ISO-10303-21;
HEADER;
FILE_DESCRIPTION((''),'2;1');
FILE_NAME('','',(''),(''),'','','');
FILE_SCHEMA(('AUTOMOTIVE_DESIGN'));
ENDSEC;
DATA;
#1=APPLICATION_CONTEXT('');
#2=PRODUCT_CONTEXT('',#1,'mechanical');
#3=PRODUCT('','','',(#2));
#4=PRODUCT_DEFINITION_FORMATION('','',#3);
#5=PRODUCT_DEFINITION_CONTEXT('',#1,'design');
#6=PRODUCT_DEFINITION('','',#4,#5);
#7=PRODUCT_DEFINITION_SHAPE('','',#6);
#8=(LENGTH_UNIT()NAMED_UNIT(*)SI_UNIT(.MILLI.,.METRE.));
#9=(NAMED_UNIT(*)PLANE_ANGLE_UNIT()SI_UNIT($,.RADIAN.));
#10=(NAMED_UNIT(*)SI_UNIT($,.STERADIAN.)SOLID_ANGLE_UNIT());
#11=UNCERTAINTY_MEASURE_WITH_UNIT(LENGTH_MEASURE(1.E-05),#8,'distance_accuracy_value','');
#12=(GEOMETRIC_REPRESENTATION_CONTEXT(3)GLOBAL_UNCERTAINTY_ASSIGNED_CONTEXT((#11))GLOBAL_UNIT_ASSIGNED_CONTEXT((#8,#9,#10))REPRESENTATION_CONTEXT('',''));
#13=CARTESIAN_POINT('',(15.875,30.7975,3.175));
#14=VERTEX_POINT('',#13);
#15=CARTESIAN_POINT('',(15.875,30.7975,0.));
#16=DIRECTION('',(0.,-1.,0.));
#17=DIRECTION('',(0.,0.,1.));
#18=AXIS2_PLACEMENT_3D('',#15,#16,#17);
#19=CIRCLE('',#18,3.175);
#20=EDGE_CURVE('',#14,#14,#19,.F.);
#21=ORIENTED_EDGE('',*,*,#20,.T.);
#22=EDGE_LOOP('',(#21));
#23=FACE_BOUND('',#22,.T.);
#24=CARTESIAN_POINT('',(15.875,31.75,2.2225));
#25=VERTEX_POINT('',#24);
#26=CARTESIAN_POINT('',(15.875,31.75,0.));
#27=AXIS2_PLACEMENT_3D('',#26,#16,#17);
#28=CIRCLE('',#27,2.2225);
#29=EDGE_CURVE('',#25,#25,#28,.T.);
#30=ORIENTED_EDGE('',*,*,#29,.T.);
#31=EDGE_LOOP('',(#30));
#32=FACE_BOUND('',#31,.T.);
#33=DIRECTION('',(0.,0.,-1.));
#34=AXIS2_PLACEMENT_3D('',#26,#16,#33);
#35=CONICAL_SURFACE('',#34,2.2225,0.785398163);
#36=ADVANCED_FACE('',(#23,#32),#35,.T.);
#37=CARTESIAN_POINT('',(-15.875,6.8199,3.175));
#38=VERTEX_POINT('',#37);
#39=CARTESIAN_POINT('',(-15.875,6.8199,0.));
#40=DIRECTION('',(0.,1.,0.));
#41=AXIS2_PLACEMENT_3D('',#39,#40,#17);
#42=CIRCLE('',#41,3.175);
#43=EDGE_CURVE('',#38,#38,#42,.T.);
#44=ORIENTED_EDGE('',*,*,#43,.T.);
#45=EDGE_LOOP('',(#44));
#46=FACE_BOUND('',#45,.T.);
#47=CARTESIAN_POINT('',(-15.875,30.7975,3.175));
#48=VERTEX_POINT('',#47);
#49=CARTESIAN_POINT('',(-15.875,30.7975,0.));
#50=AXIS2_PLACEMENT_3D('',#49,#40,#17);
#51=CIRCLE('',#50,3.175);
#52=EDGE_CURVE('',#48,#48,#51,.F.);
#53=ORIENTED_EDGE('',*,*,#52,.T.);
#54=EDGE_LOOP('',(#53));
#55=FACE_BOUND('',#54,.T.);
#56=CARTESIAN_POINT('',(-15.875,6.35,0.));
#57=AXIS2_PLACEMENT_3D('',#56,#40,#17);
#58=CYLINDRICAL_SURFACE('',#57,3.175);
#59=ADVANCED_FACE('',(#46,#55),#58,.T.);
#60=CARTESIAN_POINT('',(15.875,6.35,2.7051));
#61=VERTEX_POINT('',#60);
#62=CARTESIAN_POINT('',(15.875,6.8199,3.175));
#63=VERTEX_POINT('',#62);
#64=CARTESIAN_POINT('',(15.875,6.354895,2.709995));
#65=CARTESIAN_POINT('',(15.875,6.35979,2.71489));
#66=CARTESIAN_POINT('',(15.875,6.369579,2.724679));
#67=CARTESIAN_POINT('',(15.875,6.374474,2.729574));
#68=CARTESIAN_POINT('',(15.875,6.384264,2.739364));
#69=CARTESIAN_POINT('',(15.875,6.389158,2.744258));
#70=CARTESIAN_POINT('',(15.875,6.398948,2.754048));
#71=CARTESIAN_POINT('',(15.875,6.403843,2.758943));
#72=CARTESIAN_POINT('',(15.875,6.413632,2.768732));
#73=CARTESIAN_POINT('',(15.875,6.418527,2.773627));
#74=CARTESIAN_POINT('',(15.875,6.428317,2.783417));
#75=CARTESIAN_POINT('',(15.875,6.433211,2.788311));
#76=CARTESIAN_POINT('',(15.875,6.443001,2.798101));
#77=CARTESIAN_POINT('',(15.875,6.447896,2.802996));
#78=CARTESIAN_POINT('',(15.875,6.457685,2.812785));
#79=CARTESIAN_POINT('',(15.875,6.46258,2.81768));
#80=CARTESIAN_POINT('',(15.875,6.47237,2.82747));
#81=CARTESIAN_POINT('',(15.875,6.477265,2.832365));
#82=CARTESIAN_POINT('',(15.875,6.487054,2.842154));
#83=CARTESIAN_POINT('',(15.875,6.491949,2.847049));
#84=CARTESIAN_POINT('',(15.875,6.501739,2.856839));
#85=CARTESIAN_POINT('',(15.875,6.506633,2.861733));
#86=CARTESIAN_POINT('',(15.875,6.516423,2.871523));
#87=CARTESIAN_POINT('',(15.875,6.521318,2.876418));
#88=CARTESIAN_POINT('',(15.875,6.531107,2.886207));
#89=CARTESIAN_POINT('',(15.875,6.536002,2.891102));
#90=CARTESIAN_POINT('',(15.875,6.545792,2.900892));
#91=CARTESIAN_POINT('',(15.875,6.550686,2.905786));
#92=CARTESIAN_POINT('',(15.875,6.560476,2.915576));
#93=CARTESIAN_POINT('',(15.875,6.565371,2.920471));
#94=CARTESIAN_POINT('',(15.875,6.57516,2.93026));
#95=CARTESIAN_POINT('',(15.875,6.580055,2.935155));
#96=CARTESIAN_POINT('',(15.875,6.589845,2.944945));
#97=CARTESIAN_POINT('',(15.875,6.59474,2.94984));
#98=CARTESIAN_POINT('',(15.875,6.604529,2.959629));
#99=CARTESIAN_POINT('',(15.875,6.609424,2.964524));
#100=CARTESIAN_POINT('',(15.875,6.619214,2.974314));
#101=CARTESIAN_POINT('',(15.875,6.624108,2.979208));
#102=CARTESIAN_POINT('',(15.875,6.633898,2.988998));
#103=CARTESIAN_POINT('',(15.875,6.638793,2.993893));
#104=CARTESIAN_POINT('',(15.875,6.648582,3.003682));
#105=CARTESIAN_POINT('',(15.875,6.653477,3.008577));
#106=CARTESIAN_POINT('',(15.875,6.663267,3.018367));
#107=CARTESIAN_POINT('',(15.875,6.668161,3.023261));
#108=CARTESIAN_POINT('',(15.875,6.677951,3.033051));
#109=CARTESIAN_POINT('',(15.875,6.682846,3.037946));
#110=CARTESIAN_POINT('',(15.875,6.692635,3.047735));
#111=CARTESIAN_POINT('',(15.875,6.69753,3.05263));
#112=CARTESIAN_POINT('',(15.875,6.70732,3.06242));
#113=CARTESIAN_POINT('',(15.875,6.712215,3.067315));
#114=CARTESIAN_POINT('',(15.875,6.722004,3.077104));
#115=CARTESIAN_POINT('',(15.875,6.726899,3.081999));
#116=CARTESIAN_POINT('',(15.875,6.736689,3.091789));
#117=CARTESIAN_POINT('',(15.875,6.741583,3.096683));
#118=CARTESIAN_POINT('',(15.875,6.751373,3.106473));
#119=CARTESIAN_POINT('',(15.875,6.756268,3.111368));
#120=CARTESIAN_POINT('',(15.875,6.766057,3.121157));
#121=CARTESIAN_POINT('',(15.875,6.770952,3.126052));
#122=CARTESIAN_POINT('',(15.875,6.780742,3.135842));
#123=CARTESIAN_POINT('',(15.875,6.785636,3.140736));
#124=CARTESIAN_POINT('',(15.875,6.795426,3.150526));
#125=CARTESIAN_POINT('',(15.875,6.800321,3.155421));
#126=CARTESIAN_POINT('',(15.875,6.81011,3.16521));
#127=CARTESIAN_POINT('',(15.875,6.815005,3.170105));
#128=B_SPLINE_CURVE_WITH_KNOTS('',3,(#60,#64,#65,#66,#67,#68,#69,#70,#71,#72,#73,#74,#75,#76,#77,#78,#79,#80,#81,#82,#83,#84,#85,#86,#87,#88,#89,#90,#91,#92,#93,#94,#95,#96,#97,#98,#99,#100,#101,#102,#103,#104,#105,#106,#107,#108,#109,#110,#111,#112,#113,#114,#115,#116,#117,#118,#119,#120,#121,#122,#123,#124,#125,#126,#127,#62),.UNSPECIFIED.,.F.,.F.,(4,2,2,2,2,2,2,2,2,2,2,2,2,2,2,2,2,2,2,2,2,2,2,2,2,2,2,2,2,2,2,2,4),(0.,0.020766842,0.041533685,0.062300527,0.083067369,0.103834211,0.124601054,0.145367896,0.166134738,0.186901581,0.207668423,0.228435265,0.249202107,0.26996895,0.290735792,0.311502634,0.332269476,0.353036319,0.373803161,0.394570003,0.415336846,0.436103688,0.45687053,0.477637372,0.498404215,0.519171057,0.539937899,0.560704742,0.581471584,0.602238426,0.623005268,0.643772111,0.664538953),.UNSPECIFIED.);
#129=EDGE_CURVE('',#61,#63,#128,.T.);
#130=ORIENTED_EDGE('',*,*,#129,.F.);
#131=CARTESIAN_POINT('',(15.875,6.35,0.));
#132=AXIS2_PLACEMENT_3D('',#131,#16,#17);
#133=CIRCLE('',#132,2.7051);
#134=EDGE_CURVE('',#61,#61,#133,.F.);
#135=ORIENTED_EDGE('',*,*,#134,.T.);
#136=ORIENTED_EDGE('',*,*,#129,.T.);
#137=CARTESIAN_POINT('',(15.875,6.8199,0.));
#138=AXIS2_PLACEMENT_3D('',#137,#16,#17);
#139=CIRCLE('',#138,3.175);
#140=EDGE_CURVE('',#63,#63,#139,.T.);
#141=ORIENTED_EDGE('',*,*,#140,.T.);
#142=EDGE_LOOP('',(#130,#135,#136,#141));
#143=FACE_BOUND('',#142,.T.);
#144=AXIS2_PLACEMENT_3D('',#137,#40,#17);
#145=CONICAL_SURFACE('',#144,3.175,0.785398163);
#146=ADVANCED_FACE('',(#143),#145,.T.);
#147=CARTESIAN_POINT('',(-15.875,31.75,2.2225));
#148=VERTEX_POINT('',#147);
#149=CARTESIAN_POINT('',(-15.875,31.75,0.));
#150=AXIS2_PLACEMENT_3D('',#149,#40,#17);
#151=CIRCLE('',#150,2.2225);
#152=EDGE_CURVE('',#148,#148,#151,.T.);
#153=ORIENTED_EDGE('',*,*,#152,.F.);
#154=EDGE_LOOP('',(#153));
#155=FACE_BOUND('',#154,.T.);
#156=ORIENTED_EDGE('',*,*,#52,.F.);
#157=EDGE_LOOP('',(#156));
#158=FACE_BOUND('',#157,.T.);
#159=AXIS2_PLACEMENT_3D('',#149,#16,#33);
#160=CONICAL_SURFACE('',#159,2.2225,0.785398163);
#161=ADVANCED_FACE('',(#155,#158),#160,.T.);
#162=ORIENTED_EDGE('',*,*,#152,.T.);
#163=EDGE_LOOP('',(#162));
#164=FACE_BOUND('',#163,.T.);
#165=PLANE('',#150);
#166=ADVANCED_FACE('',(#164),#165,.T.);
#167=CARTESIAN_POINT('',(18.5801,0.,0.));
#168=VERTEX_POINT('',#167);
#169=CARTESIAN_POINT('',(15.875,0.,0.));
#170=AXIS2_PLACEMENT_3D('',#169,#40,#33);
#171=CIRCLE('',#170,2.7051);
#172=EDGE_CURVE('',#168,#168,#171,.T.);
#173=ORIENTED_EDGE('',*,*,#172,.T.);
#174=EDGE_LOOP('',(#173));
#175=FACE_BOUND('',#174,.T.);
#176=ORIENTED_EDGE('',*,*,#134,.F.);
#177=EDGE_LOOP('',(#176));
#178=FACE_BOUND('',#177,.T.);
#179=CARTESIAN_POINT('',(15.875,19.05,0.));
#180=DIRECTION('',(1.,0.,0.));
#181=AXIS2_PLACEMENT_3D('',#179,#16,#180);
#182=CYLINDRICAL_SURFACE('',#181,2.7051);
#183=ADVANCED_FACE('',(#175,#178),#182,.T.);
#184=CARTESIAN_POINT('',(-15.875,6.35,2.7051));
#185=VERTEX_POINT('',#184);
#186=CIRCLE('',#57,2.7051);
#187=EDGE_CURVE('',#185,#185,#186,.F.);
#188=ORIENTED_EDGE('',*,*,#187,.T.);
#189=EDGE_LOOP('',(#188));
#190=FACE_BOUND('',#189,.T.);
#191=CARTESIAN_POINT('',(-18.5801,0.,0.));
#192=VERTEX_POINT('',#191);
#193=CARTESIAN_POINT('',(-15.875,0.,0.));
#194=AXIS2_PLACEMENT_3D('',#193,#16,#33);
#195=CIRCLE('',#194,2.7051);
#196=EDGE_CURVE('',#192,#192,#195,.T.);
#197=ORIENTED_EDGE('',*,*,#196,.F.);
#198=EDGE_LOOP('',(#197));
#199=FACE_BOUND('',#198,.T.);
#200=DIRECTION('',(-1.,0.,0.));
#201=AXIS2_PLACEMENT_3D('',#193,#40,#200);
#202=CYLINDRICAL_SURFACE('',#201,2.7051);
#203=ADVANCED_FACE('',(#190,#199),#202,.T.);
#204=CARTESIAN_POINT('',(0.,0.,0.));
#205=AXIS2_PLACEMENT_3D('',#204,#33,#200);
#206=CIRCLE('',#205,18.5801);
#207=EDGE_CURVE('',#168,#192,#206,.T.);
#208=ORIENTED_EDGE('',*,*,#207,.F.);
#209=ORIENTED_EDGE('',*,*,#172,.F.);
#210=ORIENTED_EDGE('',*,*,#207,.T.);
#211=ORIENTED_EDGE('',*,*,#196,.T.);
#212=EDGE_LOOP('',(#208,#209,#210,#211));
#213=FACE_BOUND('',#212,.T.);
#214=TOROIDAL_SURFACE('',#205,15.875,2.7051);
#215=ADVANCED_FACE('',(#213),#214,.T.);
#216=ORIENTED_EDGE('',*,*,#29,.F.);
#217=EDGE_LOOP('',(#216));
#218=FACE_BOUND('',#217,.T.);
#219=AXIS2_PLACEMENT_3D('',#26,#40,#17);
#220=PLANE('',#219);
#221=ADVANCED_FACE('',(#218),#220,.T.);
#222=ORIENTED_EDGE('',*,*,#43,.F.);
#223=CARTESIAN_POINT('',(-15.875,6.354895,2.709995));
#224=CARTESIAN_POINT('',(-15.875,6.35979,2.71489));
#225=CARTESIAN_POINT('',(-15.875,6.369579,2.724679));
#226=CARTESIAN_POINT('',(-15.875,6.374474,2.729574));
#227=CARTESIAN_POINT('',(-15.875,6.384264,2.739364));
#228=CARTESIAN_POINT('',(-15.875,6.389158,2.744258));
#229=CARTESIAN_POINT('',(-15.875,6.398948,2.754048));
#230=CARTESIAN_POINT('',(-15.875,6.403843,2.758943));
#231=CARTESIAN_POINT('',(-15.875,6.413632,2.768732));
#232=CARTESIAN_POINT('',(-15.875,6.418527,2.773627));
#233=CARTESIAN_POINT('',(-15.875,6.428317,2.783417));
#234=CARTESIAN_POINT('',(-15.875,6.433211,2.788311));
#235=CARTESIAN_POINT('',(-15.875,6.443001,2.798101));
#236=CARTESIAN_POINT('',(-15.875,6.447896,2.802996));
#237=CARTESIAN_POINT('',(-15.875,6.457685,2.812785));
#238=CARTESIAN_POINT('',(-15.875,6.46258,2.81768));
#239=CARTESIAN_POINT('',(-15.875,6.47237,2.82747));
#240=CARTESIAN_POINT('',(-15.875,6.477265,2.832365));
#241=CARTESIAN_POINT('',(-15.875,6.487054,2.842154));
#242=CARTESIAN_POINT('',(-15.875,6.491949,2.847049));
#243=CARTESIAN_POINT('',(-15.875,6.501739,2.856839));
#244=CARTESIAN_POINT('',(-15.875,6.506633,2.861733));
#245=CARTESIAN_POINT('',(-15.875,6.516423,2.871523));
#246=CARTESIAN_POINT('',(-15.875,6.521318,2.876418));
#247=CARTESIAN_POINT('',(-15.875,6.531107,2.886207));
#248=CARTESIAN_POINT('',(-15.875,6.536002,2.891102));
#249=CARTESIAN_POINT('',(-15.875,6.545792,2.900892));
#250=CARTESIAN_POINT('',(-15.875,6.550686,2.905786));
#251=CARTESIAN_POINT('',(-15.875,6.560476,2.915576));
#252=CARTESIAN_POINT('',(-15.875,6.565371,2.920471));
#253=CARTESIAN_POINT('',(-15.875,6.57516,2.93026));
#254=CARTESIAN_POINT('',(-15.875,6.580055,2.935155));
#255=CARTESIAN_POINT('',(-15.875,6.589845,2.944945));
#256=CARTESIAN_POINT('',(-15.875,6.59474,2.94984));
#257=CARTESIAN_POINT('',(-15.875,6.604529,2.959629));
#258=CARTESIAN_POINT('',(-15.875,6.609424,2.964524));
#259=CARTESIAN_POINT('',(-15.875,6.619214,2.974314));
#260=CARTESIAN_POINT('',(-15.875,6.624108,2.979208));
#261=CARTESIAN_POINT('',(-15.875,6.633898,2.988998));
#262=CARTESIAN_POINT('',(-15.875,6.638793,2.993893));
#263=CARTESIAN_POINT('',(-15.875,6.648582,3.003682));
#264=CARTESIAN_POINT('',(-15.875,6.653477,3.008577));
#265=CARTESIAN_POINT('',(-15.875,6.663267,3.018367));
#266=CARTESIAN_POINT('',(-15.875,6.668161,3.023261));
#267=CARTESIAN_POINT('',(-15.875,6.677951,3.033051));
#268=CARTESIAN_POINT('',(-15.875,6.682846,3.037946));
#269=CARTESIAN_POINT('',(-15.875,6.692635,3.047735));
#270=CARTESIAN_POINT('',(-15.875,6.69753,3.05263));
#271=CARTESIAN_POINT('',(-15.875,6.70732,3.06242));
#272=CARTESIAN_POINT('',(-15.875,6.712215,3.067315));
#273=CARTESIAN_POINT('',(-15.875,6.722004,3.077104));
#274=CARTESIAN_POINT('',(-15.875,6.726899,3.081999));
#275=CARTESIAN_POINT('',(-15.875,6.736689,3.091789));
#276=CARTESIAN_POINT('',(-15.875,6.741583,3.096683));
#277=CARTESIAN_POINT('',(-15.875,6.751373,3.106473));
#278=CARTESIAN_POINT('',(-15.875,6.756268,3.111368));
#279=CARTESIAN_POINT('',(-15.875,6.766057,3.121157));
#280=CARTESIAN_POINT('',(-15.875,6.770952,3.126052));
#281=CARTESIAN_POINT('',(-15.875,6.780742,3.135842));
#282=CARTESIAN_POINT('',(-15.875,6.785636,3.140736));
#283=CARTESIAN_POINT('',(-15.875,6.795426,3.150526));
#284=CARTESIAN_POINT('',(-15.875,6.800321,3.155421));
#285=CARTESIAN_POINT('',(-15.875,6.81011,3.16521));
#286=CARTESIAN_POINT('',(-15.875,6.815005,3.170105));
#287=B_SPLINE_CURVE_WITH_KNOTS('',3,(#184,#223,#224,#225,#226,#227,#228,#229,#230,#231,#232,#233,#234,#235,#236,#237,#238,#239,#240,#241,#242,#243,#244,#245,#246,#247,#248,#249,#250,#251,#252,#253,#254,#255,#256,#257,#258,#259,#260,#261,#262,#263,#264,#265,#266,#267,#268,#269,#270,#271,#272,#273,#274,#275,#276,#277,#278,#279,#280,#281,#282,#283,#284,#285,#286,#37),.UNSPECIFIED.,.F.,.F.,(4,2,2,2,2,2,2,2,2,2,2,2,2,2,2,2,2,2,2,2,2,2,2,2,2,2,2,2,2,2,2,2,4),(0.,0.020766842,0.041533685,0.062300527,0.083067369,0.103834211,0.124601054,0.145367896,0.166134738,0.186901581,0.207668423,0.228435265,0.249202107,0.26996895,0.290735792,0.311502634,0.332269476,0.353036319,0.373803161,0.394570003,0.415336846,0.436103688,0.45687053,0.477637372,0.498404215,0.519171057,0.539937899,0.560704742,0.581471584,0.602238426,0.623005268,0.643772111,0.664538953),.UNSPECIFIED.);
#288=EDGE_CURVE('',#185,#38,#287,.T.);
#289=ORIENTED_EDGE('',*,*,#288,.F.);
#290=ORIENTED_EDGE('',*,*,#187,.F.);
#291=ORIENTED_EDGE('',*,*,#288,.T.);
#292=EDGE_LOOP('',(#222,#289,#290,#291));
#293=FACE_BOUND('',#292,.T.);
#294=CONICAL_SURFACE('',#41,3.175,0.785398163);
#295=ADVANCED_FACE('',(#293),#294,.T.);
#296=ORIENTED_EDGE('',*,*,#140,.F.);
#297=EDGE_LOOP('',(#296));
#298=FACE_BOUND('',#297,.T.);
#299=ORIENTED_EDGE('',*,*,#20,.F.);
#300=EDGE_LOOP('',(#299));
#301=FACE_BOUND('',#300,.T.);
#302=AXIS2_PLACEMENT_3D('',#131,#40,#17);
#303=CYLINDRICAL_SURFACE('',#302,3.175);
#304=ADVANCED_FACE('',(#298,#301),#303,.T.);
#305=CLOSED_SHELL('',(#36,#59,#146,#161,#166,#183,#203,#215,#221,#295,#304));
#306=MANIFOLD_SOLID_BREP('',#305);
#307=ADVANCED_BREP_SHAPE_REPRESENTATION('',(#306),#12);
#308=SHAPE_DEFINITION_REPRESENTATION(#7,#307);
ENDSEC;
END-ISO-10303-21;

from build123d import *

# Parameters (mm, degrees)
SKETCH2_R           = 3.175
BOSS_EXTRUDE1_DEPTH = 25.4
CHAMFER2_SIZE       = 0.9525
CHAMFER3_SIZE       = 0.4699
SKETCH12_R          = 2.7051
SKETCH9_R           = 3.175
BOSS_EXTRUDE2_DEPTH = 2.778125
SKETCH10_OUTSIDE_W  = 233.937
SKETCH10_OUTSIDE_H  = 203.708
SKETCH10_OUTSIDE_R  = 5.55625
CUT_EXTRUDE1_DEPTH  = 51.205782884
CUT_EXTRUDE1_DRAFT  = -60
SKETCH11_OUTSIDE_W  = 217.071
SKETCH11_OUTSIDE_H  = 186.842
SKETCH11_OUTSIDE_R  = 5.55625
CUT_EXTRUDE2_DEPTH  = 46.336665415
CUT_EXTRUDE2_DRAFT  = -60
CHAMFER4_SIZE       = 0.381
LPATTERN1_COUNT     = 2
LPATTERN1_PITCH     = 31.75


with BuildPart() as part:
    # Sketch2 → Boss-Extrude1 (new body)
    with BuildSketch(Plane(origin=(0, 31.75, 0), x_dir=(-1, 0, 0), z_dir=(0, 1, 0))):
        with Locations(Location((15.875, 0, 0), (0, 0, 90))):
            Circle(SKETCH2_R)
    extrude(amount=-BOSS_EXTRUDE1_DEPTH)

    # Chamfer2
    chamfer2_edges = [part.edges().sort_by_distance(p)[0] for p in [
        (-15.875, 31.75, -3.175),
    ]]
    chamfer(chamfer2_edges, length=CHAMFER2_SIZE)

    # Chamfer3
    chamfer3_edges = [part.edges().sort_by_distance(p)[0] for p in [
        (-15.875, 6.35, -3.175),
    ]]
    chamfer(chamfer3_edges, length=CHAMFER3_SIZE)


with BuildPart() as body_2:
    # Mirror2: mirrored copy
    add(part.part.mirror(Plane(origin=(0, 0, 0), x_dir=(0, 0, 1), z_dir=(1, 0, 0))))


with BuildPart() as part_1:
    add(part.part)

    add(body_2.part)  # Sweep1 merges body 2
    # Sweep1: sweep along a path in Sketch8
    with BuildLine(Plane.XY) as sweep1_path:
        Line((-15.875, 19.05), (-15.875, 0))
        ThreePointArc((-15.875, 0), (0, -15.875), (15.875, 0))
        Line((15.875, 0), (15.875, 19.05))
    # Sketch12 → Sweep1 (sweep)
    with BuildSketch(Plane(origin=(0, 0, 0), x_dir=(0, 0, -1), z_dir=(1, 0, 0))):
        with Locations((0, -15.875)):
            Circle(SKETCH12_R)
    sweep(path=sweep1_path.line)


with BuildPart() as body_2_2:
    # Sketch9 → Boss-Extrude2 (new, symmetric)
    with BuildSketch(Plane(origin=(0, 23.283333333, 0), x_dir=(-1, 0, 0), z_dir=(0, 1, 0))):
        Polygon((-19.082902433, 5.55625), (-22.290804866, 0), (-19.082902433, -5.55625), (-12.667097567, -5.55625), (-9.459195134, 0), (-12.667097567, 5.55625), align=None)
        with Locations(Location((-15.875, 0, 0), (0, 0, 90))):
            Circle(SKETCH9_R, mode=Mode.SUBTRACT)
    extrude(amount=BOSS_EXTRUDE2_DEPTH, both=True)


with BuildPart() as cut_extrude1_tool:
    # Sketch10 outside → Cut-Extrude1 (with draft: the straight prism first)
    with BuildSketch(Plane(origin=(0, 26.061458333, 0), x_dir=(1, 0, 0), z_dir=(0, 1, 0))):
        with Locations((1.6205, 0)):
            Rectangle(SKETCH10_OUTSIDE_W, SKETCH10_OUTSIDE_H)
        with Locations((15.875, 0)):
            Circle(SKETCH10_OUTSIDE_R, mode=Mode.SUBTRACT)
    extrude(amount=-CUT_EXTRUDE1_DEPTH)
    # Cut-Extrude1: the draft: its side faces are tilted about the plane it starts from
    cut_extrude1_sides = [cut_extrude1_tool.faces().sort_by_distance(p)[0] for p in [
        (1.6205, 0.458566891, 101.854),
        (118.589, 0.458566891, 0),
        (1.6205, 0.458566891, -101.854),
        (-115.348, 0.458566891, 0),
        (10.31875, 0.458566891, 0),
    ]]
    draft(cut_extrude1_sides, Plane(origin=(0, 26.061458333, 0), x_dir=(1, 0, 0), z_dir=(0, 1, 0)), CUT_EXTRUDE1_DRAFT)


with BuildPart() as body_2_2_1:
    add(body_2_2.part)

    # Cut-Extrude1: cut by cut_extrude1_tool
    add(cut_extrude1_tool.part, mode=Mode.SUBTRACT)


with BuildPart() as cut_extrude2_tool:
    # Sketch11 outside → Cut-Extrude2 (with draft: the straight prism first)
    with BuildSketch(Plane.XZ.offset(-20.505208333)):
        with Locations((1.6205, 0)):
            Rectangle(SKETCH11_OUTSIDE_W, SKETCH11_OUTSIDE_H)
        with Locations((15.875, 0)):
            Circle(SKETCH11_OUTSIDE_R, mode=Mode.SUBTRACT)
    extrude(amount=-CUT_EXTRUDE2_DEPTH)
    # Cut-Extrude2: the draft: its side faces are tilted about the plane it starts from
    cut_extrude2_sides = [cut_extrude2_tool.faces().sort_by_distance(p)[0] for p in [
        (1.6205, 43.673541041, -93.421),
        (110.156, 43.673541041, 0),
        (1.6205, 43.673541041, 93.421),
        (-106.915, 43.673541041, 0),
        (10.31875, 43.673541041, 0),
    ]]
    draft(cut_extrude2_sides, Plane.XZ.offset(-20.505208333), CUT_EXTRUDE2_DRAFT)


with BuildPart() as body_2_2_2:
    add(body_2_2_1.part)

    # Cut-Extrude2: cut by cut_extrude2_tool
    add(cut_extrude2_tool.part, mode=Mode.SUBTRACT)

    # Chamfer4
    chamfer4_edges = [body_2_2_2.edges().sort_by_distance(p)[0] for p in [
        (15.875, 20.505208333, -3.175),
        (15.875, 26.061458333, -3.175),
    ]]
    chamfer(chamfer4_edges, length=CHAMFER4_SIZE)


with BuildPart() as lpattern1_1:
    # LPattern1: pattern copy
    add(body_2_2_2.part.moved(Location(Vector(-1, 0, 0) * (1 * LPATTERN1_PITCH))))


solid = part_1.part
